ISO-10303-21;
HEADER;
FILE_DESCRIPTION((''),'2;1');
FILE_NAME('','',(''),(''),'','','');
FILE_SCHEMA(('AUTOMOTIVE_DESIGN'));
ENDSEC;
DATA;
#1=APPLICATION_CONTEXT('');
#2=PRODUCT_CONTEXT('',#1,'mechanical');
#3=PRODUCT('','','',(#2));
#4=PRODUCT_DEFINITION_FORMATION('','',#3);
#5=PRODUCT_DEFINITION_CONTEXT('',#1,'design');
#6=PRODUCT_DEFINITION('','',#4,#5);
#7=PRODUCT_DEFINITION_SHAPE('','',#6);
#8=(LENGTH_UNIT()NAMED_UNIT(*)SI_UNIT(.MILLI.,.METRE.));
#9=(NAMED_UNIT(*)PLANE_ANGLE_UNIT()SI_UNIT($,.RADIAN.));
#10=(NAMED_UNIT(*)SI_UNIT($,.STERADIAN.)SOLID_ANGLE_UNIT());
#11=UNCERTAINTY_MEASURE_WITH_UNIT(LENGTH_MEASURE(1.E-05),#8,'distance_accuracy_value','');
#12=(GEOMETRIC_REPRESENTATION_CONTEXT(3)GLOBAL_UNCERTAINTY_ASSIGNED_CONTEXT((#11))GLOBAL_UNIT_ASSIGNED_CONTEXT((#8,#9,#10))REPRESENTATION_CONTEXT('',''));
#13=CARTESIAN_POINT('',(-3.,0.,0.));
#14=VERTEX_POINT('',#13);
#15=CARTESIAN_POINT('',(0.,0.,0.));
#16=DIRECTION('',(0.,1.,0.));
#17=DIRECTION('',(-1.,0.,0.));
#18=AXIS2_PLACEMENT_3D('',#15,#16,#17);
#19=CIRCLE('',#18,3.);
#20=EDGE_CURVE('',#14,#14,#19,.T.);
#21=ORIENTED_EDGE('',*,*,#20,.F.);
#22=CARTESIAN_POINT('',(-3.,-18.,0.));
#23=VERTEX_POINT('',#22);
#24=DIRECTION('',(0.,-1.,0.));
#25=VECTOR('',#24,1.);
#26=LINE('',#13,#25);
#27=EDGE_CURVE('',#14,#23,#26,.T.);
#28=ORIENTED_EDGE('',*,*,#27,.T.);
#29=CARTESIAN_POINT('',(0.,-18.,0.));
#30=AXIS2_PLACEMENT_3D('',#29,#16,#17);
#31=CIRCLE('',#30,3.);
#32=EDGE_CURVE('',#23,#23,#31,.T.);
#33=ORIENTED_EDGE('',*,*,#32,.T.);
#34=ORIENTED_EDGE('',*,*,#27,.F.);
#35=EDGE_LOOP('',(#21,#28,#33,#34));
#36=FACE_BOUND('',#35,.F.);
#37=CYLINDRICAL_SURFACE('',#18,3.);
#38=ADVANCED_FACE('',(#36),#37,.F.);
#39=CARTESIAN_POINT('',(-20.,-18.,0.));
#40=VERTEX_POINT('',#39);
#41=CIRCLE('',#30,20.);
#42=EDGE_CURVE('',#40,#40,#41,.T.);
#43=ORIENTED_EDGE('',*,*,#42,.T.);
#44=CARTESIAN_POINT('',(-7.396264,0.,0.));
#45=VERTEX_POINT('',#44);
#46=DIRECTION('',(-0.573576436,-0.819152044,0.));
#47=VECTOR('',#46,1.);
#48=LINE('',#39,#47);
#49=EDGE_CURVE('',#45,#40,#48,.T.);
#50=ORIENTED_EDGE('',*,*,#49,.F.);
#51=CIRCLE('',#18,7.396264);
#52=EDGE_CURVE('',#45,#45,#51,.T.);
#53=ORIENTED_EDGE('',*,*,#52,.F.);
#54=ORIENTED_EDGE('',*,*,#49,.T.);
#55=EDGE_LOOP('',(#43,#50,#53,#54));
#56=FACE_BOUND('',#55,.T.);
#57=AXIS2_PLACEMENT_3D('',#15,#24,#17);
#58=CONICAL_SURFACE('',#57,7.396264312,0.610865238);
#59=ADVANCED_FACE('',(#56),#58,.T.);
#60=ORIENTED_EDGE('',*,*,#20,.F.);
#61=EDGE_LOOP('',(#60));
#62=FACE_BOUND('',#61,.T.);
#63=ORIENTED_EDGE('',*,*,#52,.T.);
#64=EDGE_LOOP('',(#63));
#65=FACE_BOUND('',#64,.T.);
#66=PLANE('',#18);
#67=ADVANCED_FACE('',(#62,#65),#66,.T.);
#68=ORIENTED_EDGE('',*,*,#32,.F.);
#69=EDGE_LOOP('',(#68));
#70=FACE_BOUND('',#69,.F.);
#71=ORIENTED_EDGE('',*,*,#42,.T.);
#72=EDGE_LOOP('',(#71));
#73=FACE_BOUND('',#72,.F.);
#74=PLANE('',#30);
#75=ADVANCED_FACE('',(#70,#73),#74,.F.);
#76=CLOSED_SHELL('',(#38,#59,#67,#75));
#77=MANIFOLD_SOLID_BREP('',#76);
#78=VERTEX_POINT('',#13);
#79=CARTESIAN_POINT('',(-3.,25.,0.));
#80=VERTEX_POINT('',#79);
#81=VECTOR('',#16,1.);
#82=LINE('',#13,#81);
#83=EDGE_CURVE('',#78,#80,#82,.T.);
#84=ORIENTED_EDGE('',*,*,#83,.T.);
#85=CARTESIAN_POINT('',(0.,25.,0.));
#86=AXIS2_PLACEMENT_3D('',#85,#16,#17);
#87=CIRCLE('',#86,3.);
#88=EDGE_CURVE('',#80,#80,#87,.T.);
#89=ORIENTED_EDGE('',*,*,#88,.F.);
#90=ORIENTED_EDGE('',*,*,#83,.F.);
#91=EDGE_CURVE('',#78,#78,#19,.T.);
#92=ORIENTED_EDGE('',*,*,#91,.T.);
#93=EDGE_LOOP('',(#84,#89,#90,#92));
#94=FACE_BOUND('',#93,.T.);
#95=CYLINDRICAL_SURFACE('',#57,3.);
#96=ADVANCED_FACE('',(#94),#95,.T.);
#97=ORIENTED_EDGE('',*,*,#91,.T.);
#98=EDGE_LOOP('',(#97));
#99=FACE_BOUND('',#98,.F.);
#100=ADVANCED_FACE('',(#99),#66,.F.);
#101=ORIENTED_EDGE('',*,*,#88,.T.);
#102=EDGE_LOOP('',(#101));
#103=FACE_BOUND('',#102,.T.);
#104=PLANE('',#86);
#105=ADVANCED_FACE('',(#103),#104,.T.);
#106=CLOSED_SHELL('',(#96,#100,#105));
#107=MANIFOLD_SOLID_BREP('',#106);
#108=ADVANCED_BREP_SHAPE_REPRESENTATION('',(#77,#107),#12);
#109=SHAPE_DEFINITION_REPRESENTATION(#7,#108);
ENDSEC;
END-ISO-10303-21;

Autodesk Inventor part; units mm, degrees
ref_plane "YZ Plane" through (0, 0, 0) normal (1, 0, 0) x (0, 1, 0)
ref_plane "XZ Plane" through (0, 0, 0) normal (0, 1, 0) x (-1, 0, 0)
ref_plane "XY Plane" through (0, 0, 0) normal (0, 0, 1) x (1, 0, 0)
sketch "Boceto1" plane through (0, 0, 0) normal (0, 1, 0) x (-1, 0, 0)
  circle A0 centre (0, 0) radius 20
  circle A1 centre (0, 0) radius 3
  dimension "d0" = 40
  dimension "d1" = 6
extrude "Extrusión1" add sketch "Boceto1" along normal blind 25 contours A1
extrude "Extrusión2" add sketch "Boceto1" against normal blind 18
draft "Cara para el ángulo de desmoldeo1" angle -35 pull direction (0, -1, 0) faces at (-19.9351, -12, -1.6093) fixed edges at (20, -18, 0)
thread "Rosca1" size "M6x1" class "6g" standard "ANSI Metric M Profile" full length
properties part number "Pata regulable M6"
